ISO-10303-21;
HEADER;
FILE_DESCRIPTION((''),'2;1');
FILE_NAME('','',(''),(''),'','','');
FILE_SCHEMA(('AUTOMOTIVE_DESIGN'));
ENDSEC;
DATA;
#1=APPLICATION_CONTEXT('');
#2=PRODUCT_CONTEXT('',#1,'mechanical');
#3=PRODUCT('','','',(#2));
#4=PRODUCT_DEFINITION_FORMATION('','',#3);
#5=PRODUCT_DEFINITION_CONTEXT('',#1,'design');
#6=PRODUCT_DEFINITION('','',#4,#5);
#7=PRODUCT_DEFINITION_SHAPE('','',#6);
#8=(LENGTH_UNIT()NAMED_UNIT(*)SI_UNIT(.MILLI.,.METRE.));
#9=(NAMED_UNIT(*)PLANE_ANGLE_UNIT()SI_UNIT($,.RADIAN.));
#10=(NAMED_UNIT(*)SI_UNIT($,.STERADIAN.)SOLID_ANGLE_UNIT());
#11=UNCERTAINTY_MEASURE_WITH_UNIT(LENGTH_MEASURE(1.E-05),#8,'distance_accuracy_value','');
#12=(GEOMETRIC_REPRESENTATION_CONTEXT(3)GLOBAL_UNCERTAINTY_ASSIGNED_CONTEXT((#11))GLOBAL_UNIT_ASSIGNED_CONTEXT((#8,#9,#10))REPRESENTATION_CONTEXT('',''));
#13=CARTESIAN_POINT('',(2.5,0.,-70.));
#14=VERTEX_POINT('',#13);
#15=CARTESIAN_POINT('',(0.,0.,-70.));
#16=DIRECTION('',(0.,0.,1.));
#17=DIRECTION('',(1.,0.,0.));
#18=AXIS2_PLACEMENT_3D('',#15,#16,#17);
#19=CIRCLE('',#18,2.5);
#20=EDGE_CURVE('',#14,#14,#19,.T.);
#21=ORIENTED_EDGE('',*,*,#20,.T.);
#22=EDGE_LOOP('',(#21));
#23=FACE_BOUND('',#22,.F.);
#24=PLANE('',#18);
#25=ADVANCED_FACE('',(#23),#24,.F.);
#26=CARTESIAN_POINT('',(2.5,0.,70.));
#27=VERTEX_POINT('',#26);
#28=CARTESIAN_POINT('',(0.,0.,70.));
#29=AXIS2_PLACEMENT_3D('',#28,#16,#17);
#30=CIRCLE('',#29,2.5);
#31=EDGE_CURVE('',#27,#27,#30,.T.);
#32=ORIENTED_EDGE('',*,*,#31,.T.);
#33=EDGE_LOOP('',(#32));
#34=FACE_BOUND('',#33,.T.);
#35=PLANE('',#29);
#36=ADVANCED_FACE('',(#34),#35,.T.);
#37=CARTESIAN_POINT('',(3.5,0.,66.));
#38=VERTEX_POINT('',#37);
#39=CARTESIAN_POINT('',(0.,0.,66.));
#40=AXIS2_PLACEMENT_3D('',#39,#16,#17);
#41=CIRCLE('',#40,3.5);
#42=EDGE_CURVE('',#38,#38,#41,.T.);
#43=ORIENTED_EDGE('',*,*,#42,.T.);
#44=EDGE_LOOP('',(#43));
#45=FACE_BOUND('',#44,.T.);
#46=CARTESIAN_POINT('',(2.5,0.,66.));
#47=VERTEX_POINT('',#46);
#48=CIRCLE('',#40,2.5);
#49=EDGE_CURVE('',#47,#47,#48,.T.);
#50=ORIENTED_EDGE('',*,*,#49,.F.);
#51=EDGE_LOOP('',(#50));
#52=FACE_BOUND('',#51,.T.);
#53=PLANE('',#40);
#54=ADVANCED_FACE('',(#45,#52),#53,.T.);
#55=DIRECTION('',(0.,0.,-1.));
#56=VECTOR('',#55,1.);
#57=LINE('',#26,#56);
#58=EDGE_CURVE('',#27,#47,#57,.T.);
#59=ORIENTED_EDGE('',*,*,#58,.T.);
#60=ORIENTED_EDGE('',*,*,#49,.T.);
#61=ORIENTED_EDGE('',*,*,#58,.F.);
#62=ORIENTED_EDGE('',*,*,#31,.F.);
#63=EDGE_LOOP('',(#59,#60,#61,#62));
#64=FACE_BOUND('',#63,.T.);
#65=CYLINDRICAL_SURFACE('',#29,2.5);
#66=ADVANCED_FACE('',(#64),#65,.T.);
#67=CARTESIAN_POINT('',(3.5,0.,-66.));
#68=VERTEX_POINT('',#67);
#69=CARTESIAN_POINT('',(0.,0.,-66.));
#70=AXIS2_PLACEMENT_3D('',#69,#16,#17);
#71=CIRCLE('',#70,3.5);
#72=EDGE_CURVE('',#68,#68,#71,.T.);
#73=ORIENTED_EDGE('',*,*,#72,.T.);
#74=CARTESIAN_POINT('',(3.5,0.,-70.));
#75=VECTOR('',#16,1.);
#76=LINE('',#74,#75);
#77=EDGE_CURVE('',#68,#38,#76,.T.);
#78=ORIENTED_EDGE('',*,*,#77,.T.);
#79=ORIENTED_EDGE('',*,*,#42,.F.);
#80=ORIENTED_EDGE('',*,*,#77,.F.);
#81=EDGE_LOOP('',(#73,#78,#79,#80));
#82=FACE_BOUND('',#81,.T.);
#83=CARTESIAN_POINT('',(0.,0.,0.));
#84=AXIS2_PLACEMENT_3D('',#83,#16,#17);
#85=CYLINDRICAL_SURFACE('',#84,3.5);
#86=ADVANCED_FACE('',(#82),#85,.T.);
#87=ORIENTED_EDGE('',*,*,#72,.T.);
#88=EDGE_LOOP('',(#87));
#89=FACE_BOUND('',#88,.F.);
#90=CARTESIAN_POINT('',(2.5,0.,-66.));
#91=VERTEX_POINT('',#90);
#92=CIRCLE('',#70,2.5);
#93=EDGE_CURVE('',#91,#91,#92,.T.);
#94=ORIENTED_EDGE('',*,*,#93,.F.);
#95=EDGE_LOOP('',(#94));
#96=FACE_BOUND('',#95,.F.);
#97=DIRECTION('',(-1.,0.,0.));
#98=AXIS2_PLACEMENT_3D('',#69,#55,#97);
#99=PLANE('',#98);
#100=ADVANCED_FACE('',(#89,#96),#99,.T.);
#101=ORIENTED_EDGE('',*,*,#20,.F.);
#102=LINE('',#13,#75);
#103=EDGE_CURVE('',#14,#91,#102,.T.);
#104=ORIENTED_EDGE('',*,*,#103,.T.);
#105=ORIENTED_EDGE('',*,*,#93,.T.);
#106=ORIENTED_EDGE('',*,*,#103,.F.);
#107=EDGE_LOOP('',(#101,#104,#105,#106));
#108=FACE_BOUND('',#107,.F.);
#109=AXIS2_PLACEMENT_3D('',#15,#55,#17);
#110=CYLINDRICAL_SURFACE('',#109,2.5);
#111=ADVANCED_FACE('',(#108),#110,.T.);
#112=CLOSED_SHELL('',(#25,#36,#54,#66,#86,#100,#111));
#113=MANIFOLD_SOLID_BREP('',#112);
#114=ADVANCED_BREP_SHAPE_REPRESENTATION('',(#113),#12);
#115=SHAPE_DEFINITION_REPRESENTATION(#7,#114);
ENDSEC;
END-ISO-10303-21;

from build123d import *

# Parameters (mm, degrees)
F0_R     = 3.5
F1_DEPTH = 70
F2_R     = 3.5
F2_R_2   = 2.5
F3_DEPTH = 4


# Not quite as in the source:
# - a pattern or mirror of a feature is missing from the dataset's text; its kind, count and spacing are read off the source's solid


with BuildPart() as f1:
    # F0 (on Top) → F1 (new body, symmetric)
    with BuildSketch(Plane.XY):
        Circle(F0_R)
    extrude(amount=F1_DEPTH, both=True)

    # F2 (on face) → F3 (cut)
    with BuildSketch(Plane.XY.offset(70)):
        Circle(F2_R)
        Circle(F2_R_2, mode=Mode.SUBTRACT)
    f3 = extrude(amount=-F3_DEPTH, mode=Mode.SUBTRACT)

    # F3_copies: F3 across plane
    add(f3.mirror(Plane(origin=(0, 0, 0), x_dir=(-1, 0, 0), z_dir=(0, 0, -1))), mode=Mode.SUBTRACT)


solid = f1.part
